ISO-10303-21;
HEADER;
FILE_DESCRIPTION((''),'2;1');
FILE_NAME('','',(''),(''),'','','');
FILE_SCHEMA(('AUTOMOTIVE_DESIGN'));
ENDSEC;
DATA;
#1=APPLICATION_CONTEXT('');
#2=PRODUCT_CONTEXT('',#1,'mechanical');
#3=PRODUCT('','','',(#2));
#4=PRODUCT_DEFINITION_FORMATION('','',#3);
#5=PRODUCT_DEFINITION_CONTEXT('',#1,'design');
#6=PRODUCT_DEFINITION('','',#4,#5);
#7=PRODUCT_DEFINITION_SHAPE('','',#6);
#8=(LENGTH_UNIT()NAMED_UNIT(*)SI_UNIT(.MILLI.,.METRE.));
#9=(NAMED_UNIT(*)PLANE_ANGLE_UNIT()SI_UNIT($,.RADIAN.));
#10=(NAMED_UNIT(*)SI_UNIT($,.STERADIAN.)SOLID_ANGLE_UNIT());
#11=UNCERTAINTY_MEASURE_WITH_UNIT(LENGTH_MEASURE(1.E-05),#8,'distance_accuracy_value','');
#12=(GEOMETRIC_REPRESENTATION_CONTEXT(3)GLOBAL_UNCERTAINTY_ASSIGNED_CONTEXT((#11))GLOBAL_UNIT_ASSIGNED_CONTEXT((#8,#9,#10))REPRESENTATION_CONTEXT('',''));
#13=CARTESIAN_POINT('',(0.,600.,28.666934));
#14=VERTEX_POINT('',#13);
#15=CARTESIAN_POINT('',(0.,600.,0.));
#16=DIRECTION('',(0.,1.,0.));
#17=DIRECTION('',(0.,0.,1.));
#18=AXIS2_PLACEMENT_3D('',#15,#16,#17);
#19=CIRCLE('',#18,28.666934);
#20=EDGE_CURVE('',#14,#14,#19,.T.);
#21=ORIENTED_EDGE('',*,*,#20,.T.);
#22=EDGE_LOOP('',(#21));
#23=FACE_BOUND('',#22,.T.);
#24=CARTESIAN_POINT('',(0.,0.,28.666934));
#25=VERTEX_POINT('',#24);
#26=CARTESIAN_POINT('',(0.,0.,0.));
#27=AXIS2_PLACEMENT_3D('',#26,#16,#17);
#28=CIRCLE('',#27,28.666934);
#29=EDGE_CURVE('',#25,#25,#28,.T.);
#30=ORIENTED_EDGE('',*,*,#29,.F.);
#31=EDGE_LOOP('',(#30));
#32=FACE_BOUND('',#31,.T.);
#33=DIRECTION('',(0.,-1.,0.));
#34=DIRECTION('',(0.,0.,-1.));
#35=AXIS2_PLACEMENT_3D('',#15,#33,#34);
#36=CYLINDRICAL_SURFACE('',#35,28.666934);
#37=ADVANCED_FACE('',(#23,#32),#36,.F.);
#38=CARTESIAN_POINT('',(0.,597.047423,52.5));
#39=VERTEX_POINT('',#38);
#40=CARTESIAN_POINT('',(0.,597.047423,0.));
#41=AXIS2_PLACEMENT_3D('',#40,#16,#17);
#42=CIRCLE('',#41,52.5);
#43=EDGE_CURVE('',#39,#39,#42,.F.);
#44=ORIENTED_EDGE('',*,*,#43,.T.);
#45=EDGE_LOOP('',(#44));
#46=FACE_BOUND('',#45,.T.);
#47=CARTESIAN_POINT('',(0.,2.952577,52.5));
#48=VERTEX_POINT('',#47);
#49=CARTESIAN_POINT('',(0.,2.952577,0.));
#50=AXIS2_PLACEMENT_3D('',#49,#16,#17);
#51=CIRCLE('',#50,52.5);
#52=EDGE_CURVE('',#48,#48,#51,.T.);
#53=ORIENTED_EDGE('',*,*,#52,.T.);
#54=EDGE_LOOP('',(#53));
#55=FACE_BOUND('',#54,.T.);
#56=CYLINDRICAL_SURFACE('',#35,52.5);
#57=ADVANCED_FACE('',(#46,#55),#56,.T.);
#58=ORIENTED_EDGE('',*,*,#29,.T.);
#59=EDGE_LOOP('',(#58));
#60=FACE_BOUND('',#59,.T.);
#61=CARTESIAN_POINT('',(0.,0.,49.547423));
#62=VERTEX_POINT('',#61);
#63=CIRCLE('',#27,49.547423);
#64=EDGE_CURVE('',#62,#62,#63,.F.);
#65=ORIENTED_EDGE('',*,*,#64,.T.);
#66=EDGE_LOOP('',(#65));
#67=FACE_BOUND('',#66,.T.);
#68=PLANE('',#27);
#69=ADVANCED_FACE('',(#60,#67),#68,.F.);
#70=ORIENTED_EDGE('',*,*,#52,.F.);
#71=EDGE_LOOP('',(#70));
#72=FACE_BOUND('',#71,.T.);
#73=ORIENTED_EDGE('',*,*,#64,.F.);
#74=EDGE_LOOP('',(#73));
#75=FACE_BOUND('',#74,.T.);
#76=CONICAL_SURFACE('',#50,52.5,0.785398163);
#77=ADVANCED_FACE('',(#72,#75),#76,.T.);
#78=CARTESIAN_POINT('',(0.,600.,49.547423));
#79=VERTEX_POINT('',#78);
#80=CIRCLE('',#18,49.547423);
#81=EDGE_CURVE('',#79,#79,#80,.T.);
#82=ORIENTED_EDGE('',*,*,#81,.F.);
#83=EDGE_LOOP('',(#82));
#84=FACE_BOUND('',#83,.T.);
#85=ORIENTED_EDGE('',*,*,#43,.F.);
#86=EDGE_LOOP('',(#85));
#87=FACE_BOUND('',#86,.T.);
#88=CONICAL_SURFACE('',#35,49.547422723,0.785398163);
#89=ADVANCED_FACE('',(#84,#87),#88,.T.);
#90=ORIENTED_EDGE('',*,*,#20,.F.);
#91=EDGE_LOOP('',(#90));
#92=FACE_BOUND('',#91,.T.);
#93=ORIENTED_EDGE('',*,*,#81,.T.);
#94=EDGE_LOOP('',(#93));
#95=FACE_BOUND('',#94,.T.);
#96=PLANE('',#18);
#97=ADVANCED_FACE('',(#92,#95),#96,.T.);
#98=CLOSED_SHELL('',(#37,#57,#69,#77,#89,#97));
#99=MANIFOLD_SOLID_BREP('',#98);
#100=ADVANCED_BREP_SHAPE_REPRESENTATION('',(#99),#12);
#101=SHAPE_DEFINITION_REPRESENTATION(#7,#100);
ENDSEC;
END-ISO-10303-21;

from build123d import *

# Parameters (mm, degrees)
SKETCH1_R           = 52.5
BOSS_EXTRUDE1_DEPTH = 600
SKETCH2_R           = 28.666934008
CUT_EXTRUDE1_DEPTH  = 605.576297914
CHAMFER1_SIZE       = 2.952577277


with BuildPart() as part:
    # Sketch1 → Boss-Extrude1 (new body)
    with BuildSketch(Plane(origin=(0, 0, 0), x_dir=(1, 0, 0), z_dir=(0, 1, 0))):
        Circle(SKETCH1_R)
    extrude(amount=BOSS_EXTRUDE1_DEPTH)

    # Sketch2 → Cut-Extrude1 (cut, through all)
    with BuildSketch(Plane(origin=(0, 0, 0), x_dir=(1, 0, 0), z_dir=(0, 1, 0))):
        Circle(SKETCH2_R)
    extrude(amount=CUT_EXTRUDE1_DEPTH, mode=Mode.SUBTRACT)

    # Chamfer1
    chamfer1_edges = [part.edges().sort_by_distance(p)[0] for p in [
        (-52.5, 600, 0),
        (-52.5, 0, 0),
    ]]
    chamfer(chamfer1_edges, length=CHAMFER1_SIZE)


solid = part.part
